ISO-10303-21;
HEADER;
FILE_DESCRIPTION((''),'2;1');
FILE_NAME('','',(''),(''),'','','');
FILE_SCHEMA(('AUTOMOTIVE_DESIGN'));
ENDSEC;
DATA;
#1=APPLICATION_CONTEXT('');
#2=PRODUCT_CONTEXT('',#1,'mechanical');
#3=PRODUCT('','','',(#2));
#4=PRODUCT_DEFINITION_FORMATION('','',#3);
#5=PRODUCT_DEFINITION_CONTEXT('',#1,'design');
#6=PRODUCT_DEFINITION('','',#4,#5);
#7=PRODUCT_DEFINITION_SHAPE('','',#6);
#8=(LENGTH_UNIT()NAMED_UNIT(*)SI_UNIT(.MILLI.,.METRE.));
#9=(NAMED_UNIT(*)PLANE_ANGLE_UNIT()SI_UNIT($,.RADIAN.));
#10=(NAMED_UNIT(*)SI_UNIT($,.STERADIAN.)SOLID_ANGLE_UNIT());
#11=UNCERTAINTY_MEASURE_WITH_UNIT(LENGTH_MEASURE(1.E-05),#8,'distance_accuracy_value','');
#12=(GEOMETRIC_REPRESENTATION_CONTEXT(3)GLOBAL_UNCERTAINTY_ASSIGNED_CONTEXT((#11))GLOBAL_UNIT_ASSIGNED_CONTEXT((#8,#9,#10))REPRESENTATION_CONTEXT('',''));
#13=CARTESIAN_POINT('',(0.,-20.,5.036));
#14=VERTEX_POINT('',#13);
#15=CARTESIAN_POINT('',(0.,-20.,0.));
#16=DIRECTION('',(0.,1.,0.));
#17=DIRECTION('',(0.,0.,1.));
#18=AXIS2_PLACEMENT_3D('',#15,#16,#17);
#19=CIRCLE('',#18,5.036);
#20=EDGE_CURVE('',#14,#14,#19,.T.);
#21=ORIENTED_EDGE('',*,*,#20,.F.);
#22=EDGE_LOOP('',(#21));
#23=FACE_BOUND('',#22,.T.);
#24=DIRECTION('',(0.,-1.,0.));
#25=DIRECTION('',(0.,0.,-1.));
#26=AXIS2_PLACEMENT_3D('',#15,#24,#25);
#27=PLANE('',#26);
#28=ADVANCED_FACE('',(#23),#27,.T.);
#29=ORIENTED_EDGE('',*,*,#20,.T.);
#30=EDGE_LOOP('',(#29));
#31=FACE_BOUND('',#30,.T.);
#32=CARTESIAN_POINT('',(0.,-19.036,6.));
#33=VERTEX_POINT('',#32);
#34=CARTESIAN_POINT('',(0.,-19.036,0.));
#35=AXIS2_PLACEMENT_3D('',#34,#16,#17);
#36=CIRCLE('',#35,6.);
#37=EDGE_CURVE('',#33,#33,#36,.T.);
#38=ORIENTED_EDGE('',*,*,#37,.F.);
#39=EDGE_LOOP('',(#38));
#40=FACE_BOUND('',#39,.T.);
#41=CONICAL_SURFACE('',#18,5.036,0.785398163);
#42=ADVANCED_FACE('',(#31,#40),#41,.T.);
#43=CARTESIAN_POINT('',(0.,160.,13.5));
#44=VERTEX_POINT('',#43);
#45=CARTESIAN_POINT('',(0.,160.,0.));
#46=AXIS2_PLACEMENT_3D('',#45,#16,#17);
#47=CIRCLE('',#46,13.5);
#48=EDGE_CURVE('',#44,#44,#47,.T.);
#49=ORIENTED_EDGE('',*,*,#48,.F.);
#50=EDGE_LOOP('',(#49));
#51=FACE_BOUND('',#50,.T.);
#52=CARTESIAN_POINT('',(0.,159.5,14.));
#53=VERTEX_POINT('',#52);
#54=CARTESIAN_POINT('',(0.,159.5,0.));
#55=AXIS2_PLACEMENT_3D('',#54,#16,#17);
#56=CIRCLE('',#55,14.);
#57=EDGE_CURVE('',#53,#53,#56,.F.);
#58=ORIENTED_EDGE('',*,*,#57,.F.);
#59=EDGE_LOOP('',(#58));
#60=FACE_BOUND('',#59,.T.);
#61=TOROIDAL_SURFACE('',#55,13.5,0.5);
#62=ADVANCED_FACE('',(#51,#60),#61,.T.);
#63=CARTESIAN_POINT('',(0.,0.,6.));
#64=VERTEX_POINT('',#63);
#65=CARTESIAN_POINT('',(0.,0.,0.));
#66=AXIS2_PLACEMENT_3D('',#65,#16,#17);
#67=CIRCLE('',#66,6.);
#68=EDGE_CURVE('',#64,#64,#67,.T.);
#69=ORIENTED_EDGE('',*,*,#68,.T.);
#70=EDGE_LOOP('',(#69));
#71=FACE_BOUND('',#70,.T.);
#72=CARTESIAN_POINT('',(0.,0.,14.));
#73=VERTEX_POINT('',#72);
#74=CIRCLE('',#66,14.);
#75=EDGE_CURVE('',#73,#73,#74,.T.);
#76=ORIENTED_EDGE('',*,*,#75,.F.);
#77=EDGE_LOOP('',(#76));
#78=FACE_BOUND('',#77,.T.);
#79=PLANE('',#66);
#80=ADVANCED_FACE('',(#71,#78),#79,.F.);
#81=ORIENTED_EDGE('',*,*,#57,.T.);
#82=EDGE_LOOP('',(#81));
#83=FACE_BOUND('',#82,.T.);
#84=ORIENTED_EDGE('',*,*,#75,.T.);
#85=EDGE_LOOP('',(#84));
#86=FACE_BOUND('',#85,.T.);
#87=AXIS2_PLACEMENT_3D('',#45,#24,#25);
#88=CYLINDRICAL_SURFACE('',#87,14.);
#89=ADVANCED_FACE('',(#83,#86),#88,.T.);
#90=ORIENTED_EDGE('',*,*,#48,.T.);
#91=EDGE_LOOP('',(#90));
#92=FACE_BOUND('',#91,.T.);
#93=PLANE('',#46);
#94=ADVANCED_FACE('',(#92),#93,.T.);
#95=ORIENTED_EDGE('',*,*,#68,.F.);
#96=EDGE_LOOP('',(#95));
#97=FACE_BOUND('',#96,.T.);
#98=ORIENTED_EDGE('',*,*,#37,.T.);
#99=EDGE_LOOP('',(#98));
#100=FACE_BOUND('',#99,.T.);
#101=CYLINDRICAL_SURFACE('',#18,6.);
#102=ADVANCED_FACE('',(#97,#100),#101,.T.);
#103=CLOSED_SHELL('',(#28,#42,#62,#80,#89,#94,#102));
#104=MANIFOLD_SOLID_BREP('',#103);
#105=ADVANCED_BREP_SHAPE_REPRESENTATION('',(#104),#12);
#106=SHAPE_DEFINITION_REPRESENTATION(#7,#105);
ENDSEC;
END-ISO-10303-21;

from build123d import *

# Parameters (mm, degrees)
SKETCH1_R           = 14
BOSS_EXTRUDE1_DEPTH = 160
SKETCH2_R           = 10
BOSS_EXTRUDE2_DEPTH = 20
FILLET1_R           = 0.5


# Read off the part's stored shape, not the designer's step: M12 Machine Threads Stud1
with BuildPart() as part:
    # Sketch1 → Boss-Extrude1 (new body)
    with BuildSketch(Plane(origin=(0, 0, 0), x_dir=(1, 0, 0), z_dir=(0, 1, 0))):
        with Locations(Location((0, 0, 0), (0, 0, 270))):
            Circle(SKETCH1_R)
    extrude(amount=BOSS_EXTRUDE1_DEPTH)

    # Sketch2 → Boss-Extrude2 (add)
    with BuildSketch(Plane.XZ):
        with Locations(Location((0, 0, 0), (0, 0, 270))):
            Circle(SKETCH2_R)
    extrude(amount=BOSS_EXTRUDE2_DEPTH)

    # M12 Machine Threads Stud1 outline → M12 Machine Threads Stud1 (revolve, cut)
    with BuildSketch(Plane.XY):
        Polygon((10, 0), (6, 0), (6, -19.036), (5.036, -20), (10, -20), align=None)
    revolve(axis=Axis((0, 0, 0), (0, 1, 0)), mode=Mode.SUBTRACT)

    # Fillet1
    fillet1_edges = [part.edges().sort_by_distance(p)[0] for p in [
        (0, 160, -14),
    ]]
    fillet(fillet1_edges, radius=FILLET1_R)


solid = part.part
